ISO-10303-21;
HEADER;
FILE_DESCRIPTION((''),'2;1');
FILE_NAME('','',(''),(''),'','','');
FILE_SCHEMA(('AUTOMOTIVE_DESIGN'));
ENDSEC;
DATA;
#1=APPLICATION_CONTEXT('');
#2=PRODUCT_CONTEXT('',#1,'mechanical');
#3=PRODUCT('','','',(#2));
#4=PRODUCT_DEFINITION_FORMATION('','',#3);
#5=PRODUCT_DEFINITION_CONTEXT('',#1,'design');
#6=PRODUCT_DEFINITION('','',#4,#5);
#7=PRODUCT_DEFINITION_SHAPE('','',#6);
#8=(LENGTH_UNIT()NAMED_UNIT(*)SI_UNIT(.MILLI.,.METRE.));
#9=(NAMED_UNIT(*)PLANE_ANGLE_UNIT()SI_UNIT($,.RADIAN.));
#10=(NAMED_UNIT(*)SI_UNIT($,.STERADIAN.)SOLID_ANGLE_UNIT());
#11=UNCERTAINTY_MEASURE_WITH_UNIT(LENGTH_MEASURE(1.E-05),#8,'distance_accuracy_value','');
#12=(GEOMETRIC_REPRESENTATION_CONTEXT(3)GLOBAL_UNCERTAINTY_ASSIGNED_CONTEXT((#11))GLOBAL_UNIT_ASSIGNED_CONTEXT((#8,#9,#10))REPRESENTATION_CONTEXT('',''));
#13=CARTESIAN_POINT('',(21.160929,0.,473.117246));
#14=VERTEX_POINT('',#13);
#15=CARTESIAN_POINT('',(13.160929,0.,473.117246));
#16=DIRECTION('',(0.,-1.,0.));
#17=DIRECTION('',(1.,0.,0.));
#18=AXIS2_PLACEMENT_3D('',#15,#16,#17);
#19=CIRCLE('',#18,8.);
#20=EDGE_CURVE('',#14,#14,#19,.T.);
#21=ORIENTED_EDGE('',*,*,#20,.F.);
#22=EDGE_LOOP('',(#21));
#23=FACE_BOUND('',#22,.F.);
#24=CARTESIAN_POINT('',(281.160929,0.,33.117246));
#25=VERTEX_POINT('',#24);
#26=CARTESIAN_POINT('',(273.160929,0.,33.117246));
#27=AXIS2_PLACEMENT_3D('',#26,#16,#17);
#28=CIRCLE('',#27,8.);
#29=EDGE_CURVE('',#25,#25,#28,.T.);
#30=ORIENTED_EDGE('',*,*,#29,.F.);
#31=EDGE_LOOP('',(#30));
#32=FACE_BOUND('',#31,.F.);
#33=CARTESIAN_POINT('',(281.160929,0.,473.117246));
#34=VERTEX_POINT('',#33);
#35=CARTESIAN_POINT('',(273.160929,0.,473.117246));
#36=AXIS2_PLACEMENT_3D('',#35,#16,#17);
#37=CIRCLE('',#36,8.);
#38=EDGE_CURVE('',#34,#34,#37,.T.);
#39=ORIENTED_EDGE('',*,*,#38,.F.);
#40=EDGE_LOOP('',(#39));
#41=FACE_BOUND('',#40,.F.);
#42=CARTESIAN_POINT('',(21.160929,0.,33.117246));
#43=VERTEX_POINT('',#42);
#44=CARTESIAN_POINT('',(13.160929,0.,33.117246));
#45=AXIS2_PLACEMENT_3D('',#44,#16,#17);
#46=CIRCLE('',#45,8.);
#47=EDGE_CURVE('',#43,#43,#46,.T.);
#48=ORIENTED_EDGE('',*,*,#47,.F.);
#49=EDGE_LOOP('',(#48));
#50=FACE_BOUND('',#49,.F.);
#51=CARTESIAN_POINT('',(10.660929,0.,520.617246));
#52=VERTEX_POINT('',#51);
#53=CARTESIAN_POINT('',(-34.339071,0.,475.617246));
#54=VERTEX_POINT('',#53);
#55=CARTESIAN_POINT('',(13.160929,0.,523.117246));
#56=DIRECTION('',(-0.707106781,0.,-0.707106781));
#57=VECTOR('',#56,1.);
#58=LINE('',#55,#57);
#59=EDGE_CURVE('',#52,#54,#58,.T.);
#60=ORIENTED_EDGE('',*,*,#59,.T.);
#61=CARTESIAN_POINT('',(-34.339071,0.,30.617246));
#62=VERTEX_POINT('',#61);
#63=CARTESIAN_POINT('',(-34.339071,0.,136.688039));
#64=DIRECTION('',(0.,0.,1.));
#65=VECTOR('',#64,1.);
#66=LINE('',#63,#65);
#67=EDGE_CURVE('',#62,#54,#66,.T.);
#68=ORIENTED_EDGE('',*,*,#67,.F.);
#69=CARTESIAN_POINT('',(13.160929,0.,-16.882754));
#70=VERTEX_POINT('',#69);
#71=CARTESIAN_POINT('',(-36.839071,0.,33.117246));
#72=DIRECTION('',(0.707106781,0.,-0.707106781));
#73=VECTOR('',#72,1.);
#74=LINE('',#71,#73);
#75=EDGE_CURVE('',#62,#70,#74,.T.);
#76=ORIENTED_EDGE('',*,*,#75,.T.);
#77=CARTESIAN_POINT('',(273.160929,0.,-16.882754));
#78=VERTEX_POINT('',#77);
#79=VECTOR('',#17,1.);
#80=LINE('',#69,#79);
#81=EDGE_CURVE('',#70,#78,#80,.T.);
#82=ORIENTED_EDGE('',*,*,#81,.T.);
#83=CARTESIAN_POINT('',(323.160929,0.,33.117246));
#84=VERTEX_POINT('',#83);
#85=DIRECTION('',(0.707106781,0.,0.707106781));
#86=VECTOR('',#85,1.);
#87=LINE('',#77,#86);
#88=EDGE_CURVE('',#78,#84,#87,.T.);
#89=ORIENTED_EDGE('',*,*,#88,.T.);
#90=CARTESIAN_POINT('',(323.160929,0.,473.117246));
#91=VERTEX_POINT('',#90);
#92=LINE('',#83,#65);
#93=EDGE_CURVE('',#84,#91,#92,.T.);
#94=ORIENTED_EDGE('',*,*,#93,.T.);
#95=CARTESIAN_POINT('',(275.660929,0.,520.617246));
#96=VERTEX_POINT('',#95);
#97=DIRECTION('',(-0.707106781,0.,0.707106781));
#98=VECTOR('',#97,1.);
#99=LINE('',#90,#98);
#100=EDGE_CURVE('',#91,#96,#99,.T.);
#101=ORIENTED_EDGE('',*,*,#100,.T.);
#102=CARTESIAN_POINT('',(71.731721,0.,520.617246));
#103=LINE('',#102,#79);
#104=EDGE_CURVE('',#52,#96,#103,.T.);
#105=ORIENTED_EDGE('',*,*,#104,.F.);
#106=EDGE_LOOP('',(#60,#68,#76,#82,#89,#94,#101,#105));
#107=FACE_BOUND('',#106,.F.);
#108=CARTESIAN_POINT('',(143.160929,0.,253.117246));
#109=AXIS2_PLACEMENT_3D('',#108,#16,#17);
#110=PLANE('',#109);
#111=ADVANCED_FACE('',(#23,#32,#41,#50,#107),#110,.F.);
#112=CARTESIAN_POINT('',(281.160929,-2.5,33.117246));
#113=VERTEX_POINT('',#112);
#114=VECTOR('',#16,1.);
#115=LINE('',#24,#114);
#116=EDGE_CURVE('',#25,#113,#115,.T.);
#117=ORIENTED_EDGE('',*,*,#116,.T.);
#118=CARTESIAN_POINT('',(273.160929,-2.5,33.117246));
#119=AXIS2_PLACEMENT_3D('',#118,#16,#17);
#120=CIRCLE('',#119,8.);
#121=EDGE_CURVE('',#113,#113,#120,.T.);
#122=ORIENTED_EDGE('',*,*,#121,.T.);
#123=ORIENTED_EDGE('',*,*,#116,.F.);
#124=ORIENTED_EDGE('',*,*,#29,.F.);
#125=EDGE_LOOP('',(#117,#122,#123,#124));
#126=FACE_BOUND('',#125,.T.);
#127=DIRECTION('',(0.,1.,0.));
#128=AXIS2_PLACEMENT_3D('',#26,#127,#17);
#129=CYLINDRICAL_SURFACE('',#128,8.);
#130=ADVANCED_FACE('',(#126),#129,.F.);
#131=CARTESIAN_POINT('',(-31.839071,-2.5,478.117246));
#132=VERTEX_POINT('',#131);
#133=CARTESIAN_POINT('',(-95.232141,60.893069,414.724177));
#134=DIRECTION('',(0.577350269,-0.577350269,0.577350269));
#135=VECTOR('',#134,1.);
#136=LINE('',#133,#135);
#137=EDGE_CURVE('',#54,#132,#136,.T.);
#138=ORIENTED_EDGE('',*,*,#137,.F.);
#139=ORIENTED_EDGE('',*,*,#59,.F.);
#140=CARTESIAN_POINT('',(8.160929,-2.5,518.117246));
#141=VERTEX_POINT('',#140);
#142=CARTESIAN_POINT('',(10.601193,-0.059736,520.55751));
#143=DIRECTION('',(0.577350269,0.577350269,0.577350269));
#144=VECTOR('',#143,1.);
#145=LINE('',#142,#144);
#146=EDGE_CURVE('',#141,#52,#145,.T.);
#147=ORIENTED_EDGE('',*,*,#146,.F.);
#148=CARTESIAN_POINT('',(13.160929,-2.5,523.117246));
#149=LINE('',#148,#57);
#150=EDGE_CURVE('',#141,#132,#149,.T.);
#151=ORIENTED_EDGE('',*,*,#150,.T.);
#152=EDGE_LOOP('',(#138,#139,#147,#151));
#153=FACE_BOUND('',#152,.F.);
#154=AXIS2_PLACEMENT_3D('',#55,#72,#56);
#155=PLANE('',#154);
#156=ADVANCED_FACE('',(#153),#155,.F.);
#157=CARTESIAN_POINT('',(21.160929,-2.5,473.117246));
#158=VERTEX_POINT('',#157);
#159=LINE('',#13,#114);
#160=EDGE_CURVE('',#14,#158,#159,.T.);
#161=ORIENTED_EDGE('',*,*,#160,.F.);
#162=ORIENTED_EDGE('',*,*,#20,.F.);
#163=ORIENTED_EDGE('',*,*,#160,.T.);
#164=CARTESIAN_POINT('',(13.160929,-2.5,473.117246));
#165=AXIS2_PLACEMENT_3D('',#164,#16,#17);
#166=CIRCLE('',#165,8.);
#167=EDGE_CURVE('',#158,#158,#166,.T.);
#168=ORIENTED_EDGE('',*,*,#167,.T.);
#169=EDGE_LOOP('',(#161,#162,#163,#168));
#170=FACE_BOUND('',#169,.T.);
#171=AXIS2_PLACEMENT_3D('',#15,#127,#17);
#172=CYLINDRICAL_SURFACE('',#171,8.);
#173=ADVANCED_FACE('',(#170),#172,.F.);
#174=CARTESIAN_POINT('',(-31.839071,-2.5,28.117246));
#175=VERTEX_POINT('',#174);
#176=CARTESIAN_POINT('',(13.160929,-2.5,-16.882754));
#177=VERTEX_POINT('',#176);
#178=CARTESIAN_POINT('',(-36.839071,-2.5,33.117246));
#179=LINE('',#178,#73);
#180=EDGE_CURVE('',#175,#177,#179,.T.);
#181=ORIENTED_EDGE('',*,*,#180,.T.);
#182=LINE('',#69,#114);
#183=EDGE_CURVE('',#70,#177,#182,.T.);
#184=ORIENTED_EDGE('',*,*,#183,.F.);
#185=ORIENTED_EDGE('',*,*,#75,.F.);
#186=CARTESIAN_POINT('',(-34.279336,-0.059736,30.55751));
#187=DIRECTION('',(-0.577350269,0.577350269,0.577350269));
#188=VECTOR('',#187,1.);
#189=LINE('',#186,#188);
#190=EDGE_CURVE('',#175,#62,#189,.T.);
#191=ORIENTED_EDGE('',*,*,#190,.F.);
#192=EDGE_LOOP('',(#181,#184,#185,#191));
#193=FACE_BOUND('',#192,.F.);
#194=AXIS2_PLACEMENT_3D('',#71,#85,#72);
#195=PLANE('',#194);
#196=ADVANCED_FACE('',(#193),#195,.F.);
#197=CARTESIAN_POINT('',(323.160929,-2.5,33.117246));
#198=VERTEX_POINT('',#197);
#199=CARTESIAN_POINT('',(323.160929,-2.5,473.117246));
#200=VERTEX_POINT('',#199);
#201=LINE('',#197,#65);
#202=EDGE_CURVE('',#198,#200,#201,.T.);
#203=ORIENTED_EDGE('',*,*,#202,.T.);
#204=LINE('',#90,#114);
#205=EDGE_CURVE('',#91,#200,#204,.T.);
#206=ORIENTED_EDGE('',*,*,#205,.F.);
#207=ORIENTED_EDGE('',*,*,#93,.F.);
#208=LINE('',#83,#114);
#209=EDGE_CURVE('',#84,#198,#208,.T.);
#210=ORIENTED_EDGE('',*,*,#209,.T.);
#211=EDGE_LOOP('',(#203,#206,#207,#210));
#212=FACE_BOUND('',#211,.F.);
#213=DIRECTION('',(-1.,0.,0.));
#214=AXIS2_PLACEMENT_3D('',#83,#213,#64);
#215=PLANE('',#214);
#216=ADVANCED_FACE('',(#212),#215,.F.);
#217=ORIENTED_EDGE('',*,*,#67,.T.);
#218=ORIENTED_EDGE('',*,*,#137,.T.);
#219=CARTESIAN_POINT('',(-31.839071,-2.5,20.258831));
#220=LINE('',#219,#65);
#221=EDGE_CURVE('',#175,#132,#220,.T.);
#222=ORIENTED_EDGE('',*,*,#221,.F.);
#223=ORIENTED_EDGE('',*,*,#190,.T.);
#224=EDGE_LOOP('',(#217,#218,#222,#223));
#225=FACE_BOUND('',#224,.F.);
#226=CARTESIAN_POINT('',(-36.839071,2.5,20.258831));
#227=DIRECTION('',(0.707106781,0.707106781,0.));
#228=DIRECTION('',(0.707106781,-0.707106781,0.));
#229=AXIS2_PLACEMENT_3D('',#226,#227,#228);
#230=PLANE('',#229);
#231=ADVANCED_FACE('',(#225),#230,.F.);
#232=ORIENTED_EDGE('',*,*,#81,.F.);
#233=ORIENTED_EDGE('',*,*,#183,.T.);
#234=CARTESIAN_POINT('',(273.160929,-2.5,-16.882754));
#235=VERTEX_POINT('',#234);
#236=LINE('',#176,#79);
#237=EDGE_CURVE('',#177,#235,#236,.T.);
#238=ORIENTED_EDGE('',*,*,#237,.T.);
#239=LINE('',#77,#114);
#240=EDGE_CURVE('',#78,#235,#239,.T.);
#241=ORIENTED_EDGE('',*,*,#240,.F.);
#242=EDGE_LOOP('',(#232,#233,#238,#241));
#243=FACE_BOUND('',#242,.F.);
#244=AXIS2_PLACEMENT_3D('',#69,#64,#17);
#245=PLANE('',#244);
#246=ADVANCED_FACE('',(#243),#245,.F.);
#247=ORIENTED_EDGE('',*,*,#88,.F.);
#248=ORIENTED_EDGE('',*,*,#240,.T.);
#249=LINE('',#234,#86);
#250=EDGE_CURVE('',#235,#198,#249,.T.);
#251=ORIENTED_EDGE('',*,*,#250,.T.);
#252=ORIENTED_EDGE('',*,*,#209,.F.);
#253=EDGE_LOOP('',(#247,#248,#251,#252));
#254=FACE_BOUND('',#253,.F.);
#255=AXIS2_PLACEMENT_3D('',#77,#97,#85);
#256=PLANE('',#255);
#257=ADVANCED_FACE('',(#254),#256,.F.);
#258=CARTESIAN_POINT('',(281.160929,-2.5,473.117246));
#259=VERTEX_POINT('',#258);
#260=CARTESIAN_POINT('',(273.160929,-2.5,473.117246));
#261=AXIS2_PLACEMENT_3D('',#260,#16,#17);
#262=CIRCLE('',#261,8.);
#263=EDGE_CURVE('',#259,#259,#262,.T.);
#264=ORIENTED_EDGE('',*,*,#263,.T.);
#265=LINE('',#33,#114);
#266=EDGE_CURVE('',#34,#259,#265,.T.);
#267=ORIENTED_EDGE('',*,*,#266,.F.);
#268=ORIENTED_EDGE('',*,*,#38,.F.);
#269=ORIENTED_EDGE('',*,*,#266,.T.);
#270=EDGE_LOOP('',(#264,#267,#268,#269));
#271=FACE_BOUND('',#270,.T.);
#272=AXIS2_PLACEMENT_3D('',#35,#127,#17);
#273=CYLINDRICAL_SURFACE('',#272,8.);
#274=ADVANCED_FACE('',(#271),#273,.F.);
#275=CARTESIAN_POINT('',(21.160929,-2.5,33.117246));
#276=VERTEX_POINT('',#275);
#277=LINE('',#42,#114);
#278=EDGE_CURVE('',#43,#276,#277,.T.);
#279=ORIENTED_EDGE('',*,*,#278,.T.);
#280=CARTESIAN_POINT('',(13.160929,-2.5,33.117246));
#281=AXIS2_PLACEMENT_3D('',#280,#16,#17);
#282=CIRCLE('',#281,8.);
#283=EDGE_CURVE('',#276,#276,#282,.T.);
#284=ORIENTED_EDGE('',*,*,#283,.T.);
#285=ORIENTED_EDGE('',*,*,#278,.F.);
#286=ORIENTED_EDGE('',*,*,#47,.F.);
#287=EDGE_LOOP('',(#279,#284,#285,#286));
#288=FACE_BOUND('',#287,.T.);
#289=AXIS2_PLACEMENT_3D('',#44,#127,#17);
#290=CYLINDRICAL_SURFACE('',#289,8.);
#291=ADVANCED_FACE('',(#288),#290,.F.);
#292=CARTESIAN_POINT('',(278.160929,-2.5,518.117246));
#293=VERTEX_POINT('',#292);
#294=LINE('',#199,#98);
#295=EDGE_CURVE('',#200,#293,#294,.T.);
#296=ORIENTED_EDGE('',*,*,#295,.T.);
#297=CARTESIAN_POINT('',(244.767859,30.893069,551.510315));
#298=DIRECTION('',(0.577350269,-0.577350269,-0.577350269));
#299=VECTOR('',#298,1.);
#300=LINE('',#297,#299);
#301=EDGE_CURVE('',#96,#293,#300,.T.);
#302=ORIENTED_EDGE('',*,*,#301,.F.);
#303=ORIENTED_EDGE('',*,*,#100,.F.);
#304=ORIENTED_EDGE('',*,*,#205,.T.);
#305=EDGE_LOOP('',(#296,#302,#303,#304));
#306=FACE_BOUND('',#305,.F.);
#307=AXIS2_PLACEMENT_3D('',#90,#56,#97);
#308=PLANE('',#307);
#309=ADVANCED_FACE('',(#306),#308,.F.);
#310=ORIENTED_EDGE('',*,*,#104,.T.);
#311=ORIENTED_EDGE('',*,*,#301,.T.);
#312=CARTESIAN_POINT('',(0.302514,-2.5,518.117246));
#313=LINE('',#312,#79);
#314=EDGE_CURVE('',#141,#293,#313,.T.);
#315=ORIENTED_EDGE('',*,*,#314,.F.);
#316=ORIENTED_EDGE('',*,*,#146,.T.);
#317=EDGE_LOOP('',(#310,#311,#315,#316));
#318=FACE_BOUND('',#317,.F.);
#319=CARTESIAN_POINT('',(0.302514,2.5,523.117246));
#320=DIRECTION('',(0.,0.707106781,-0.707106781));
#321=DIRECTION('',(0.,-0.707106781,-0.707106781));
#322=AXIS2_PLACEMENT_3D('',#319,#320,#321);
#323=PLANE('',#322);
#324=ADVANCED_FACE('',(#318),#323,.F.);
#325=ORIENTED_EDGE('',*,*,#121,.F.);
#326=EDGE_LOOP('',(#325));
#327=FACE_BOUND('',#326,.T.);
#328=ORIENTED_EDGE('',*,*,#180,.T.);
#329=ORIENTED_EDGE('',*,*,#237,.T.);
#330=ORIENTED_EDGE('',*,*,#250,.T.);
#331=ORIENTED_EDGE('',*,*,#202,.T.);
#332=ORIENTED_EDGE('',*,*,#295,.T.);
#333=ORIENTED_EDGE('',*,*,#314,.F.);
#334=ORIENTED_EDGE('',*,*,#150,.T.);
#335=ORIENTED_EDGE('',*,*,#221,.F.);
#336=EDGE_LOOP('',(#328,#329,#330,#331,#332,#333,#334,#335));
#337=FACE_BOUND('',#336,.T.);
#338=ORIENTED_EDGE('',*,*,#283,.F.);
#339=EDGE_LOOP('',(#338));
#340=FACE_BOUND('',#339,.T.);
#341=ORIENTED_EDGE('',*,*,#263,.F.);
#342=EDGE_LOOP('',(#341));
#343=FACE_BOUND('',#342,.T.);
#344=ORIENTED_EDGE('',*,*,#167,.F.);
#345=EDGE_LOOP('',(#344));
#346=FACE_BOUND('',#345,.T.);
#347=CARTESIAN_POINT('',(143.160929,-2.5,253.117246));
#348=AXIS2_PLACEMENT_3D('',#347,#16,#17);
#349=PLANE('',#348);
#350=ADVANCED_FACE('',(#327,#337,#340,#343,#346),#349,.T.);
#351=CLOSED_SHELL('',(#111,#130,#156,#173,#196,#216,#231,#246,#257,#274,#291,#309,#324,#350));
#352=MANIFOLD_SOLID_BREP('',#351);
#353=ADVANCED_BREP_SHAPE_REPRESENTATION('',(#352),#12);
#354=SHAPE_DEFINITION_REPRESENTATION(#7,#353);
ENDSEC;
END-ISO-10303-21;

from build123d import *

# Parameters (mm, degrees)
F0_R        = 8
F1_DEPTH    = 2.5
F2_T1_DEPTH = 285.7168298797
F2_T3_DEPTH = 465.7168298797


# Not quite as in the source:
# - a fillet or chamfer that OpenCascade refuses, or shapes differently, is made with other operations: its cross-section is extruded or revolved along the edge and cut away or added


with BuildPart() as f1:
    # F0 (on Front) → F1 (new body)
    with BuildSketch(Plane.XZ):
        Polygon((273.1609285387, 523.1172461575), (13.1609285387, 523.1172461575), (-36.8390714613, 473.1172461575), (-36.8390714613, 33.1172461575), (13.1609285387, -16.8827538425), (273.1609285387, -16.8827538425), (323.1609285387, 33.1172461575), (323.1609285387, 473.1172461575), align=None)
        with Locations((13.1609285387, 33.1172461575)):
            Circle(F0_R, mode=Mode.SUBTRACT)
        with Locations((273.1609285387, 33.1172461575)):
            Circle(F0_R, mode=Mode.SUBTRACT)
        with Locations((13.1609285387, 473.1172461575)):
            Circle(F0_R, mode=Mode.SUBTRACT)
        with Locations((273.1609285387, 473.1172461575)):
            Circle(F0_R, mode=Mode.SUBTRACT)
    extrude(amount=F1_DEPTH)

    # F2: chamfer of 5 on 2 edges, made by hand

    # F2_s2 → F2_t1 (cut)
    with BuildSketch(Plane.YZ.offset(0.3025135989)):
        Polygon((2.5, 523.1172461575), (-2.5, 518.1172461575), (-2.5, 523.1172461575), align=None)
    extrude(amount=F2_T1_DEPTH, mode=Mode.SUBTRACT)

    # F2_s4 → F2_t3 (cut)
    with BuildSketch(Plane.XY.offset(20.2588312177)):
        Polygon((-36.8390714613, 2.5), (-31.8390714613, -2.5), (-36.8390714613, -2.5), align=None)
    extrude(amount=F2_T3_DEPTH, mode=Mode.SUBTRACT)


solid = f1.part
